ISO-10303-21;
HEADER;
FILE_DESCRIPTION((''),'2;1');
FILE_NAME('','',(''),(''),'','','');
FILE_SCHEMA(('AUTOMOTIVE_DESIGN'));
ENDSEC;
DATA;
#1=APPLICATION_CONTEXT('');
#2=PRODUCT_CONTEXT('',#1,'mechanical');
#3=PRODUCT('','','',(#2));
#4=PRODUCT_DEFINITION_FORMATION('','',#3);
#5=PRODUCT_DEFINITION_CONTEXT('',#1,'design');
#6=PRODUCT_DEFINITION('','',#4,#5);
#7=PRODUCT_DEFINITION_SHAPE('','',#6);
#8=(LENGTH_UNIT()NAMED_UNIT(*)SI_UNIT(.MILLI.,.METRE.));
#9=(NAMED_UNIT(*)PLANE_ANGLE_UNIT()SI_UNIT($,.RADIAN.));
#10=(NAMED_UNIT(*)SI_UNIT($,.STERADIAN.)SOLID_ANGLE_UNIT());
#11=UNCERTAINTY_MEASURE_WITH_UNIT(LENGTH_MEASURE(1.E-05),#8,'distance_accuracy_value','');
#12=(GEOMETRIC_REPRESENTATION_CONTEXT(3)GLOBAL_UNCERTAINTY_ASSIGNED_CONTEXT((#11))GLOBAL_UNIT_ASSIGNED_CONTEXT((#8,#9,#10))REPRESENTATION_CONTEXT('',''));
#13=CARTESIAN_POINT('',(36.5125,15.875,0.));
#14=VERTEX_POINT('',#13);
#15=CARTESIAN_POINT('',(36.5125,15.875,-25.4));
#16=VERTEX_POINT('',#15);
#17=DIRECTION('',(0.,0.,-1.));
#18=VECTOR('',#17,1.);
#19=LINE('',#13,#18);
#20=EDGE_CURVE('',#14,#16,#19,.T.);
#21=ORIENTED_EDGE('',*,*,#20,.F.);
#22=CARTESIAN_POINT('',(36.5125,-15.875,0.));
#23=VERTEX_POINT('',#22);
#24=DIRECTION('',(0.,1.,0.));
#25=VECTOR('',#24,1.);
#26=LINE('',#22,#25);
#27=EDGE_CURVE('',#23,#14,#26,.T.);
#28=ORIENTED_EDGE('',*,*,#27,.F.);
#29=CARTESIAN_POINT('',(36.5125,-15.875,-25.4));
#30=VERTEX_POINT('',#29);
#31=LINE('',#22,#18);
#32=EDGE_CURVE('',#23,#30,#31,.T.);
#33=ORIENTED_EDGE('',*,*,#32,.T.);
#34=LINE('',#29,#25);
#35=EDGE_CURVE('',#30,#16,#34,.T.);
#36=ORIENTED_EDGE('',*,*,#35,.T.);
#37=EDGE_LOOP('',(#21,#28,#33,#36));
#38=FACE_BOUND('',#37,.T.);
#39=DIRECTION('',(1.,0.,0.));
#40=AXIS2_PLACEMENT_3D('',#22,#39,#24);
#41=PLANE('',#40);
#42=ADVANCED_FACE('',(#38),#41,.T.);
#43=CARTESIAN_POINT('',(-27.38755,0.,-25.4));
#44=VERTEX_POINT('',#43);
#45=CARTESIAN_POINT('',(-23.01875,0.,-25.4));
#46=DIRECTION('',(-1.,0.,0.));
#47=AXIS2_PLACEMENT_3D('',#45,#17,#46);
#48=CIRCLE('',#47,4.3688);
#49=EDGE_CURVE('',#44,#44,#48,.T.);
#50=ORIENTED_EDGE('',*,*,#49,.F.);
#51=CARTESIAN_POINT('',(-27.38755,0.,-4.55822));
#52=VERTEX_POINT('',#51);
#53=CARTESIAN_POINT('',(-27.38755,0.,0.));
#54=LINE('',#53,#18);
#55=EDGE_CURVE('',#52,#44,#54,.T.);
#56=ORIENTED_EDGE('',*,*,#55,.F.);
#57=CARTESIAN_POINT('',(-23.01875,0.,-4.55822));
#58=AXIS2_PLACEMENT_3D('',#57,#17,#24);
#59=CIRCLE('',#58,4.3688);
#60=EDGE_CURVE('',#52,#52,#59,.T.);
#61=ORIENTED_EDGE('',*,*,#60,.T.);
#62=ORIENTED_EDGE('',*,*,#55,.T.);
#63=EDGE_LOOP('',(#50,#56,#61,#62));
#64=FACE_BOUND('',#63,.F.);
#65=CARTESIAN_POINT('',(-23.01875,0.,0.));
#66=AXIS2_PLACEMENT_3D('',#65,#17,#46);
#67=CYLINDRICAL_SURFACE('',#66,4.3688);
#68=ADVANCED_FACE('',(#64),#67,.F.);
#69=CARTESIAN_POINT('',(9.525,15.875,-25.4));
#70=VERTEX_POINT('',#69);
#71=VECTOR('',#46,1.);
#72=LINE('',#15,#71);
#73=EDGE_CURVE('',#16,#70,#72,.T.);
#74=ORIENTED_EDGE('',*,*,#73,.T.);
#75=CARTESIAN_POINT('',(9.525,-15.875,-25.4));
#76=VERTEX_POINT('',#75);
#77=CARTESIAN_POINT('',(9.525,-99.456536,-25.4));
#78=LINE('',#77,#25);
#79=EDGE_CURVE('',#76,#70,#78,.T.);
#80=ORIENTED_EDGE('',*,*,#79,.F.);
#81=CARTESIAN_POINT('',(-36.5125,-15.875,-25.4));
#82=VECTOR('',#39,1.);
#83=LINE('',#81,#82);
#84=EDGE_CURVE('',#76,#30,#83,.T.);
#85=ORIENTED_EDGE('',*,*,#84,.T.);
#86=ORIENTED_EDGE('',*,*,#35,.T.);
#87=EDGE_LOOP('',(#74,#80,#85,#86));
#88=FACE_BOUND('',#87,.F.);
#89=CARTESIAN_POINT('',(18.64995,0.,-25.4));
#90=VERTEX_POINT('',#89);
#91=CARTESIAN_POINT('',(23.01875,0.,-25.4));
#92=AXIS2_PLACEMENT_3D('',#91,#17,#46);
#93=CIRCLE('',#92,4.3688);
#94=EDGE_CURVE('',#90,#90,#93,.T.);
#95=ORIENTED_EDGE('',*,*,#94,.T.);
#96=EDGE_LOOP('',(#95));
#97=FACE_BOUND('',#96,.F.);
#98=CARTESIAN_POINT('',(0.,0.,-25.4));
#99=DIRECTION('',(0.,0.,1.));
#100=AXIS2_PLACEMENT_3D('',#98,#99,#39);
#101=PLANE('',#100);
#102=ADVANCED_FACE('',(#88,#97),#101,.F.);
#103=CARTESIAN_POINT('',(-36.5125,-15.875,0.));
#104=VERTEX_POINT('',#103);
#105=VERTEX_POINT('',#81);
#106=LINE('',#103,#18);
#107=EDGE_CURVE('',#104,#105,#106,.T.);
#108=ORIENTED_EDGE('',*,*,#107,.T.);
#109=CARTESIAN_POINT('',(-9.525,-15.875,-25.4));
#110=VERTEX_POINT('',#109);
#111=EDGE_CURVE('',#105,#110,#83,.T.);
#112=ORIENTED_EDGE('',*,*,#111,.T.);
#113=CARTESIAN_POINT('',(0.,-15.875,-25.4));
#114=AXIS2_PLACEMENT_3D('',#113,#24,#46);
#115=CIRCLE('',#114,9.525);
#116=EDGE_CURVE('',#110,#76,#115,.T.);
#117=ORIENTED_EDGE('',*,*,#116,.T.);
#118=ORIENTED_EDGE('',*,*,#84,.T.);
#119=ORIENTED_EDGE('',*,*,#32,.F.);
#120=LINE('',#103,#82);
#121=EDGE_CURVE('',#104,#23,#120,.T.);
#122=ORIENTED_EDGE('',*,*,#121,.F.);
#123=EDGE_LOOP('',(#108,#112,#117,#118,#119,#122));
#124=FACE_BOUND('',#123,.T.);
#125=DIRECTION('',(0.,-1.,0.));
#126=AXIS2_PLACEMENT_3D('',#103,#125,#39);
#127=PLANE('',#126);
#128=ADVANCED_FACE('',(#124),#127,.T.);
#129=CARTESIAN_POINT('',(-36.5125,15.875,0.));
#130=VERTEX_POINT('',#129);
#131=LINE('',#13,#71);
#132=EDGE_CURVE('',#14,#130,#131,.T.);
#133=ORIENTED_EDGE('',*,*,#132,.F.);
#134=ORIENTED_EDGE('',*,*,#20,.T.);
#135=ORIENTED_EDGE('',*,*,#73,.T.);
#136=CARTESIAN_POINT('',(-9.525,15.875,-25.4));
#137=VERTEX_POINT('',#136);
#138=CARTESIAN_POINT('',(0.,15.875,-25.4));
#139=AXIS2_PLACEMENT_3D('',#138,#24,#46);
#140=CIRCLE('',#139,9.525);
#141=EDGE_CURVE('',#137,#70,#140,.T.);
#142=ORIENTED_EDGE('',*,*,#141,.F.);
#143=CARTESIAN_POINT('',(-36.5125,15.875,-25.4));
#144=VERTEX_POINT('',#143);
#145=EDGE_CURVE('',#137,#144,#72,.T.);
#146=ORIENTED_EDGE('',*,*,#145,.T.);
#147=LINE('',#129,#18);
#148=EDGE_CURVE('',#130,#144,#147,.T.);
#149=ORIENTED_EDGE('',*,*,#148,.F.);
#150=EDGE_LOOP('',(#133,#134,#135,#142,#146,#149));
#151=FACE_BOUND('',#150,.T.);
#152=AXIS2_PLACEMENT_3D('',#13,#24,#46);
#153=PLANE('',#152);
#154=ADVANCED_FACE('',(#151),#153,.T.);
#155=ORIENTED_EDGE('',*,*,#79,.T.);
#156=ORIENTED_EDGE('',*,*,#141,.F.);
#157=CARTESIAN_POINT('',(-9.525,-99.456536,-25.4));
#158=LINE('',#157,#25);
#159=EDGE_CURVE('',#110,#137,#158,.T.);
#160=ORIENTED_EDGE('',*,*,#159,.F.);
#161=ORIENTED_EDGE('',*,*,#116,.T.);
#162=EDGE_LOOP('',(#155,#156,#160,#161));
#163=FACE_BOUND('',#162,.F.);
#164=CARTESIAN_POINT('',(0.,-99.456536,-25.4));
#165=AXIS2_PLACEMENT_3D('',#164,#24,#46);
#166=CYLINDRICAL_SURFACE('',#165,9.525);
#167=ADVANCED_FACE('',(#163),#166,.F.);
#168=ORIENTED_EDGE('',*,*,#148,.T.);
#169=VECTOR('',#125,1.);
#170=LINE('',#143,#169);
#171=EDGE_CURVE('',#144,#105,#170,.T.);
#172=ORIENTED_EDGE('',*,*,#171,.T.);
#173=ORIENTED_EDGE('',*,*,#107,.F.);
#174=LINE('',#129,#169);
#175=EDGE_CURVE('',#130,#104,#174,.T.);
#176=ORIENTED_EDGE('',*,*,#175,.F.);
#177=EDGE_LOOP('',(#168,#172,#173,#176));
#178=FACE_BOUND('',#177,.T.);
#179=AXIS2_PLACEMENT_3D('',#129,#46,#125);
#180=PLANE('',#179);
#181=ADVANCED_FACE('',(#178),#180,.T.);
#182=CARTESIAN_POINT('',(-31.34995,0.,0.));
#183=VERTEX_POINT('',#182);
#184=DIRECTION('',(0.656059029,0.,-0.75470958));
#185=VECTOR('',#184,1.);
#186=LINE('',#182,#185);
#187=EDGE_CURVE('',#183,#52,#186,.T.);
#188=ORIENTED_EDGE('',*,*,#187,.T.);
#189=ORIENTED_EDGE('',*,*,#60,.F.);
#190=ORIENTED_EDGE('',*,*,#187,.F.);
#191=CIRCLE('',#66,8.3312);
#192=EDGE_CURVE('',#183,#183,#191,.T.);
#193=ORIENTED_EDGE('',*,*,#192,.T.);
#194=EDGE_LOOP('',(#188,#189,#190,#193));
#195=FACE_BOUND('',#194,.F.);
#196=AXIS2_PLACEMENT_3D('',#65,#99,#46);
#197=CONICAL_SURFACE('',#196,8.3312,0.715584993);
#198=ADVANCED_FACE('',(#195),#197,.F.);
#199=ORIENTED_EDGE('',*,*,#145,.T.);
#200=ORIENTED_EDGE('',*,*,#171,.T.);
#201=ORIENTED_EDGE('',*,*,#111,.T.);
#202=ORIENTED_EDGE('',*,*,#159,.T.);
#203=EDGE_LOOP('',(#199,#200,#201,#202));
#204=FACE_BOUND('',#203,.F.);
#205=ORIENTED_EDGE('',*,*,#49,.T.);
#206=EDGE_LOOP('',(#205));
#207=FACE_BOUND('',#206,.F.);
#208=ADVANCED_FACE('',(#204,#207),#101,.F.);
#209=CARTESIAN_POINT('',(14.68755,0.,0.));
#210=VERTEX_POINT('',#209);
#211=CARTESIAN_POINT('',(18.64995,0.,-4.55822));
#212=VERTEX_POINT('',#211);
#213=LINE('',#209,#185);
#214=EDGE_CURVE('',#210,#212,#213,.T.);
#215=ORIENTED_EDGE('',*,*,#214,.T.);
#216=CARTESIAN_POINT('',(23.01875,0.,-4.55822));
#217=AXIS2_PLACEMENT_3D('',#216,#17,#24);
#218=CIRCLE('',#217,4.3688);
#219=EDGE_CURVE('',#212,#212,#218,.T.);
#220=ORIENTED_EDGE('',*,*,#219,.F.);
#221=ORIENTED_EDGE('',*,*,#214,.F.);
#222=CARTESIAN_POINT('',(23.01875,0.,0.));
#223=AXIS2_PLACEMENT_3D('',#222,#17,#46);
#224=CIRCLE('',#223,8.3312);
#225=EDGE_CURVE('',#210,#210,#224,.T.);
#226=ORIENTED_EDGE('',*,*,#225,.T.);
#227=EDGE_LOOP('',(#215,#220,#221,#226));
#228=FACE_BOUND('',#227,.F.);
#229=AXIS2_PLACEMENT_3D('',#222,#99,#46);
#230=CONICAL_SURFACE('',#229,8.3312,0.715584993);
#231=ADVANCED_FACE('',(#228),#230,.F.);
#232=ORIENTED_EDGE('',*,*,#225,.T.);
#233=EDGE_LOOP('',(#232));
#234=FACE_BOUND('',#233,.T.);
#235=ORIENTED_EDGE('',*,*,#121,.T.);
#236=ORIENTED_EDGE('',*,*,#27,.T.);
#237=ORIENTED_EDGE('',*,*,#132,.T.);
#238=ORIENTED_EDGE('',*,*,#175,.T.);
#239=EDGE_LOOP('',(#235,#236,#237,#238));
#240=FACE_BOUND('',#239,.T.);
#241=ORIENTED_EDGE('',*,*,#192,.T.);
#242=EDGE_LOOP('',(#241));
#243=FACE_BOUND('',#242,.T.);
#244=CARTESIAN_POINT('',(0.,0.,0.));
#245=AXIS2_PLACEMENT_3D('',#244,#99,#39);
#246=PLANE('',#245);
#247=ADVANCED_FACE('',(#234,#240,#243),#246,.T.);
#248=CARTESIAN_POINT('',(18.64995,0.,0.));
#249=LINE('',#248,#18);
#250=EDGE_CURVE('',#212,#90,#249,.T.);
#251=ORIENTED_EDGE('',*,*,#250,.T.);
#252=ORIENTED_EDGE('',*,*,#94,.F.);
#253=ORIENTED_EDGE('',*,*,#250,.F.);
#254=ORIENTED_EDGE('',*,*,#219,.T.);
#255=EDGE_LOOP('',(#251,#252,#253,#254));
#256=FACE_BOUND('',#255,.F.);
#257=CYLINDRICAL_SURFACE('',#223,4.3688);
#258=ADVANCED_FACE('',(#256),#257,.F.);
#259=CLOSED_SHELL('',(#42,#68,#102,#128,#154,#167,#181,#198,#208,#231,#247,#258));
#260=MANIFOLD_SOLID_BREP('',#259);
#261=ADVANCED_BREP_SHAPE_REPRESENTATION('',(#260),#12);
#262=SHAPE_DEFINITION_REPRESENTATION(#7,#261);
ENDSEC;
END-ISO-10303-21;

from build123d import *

# Parameters (mm, degrees)
F1_DEPTH       = 25.4
F2_D           = 8.7376
F2_DEPTH       = 29.6333418
F2_CSINK_D     = 16.6624
F2_CSINK_ANGLE = 82
F2_TIP         = 2.6250398724
F4_D           = 19.05


# Not quite as in the source:
# - a feature names something its author has since deleted; it is built from what else it names


with BuildPart() as f1:
    # F0 (on Top) → F1 (new body)
    with BuildSketch(Plane.XY):
        Polygon((36.5125, -15.875), (36.5125, 15.875), (0, 15.875), (-36.5125, 15.875), (-36.5125, -15.875), align=None)
    extrude(amount=-F1_DEPTH)

    # F2
    with Locations(Plane.XY):
        with Locations((-23.01875, 0), (23.01875, 0)):
            CounterSinkHole(F2_D / 2, F2_CSINK_D / 2, depth=F2_DEPTH, counter_sink_angle=F2_CSINK_ANGLE)
            with Locations((0, 0, -(F2_DEPTH + F2_TIP / 2))):  # 118° drill point
                Cone(0, F2_D / 2, F2_TIP, mode=Mode.SUBTRACT)

    # F4 (through all)
    with Locations(Plane.XZ.offset(15.875)):
        with Locations((0, -25.4)):
            Hole(F4_D / 2)


solid = f1.part
